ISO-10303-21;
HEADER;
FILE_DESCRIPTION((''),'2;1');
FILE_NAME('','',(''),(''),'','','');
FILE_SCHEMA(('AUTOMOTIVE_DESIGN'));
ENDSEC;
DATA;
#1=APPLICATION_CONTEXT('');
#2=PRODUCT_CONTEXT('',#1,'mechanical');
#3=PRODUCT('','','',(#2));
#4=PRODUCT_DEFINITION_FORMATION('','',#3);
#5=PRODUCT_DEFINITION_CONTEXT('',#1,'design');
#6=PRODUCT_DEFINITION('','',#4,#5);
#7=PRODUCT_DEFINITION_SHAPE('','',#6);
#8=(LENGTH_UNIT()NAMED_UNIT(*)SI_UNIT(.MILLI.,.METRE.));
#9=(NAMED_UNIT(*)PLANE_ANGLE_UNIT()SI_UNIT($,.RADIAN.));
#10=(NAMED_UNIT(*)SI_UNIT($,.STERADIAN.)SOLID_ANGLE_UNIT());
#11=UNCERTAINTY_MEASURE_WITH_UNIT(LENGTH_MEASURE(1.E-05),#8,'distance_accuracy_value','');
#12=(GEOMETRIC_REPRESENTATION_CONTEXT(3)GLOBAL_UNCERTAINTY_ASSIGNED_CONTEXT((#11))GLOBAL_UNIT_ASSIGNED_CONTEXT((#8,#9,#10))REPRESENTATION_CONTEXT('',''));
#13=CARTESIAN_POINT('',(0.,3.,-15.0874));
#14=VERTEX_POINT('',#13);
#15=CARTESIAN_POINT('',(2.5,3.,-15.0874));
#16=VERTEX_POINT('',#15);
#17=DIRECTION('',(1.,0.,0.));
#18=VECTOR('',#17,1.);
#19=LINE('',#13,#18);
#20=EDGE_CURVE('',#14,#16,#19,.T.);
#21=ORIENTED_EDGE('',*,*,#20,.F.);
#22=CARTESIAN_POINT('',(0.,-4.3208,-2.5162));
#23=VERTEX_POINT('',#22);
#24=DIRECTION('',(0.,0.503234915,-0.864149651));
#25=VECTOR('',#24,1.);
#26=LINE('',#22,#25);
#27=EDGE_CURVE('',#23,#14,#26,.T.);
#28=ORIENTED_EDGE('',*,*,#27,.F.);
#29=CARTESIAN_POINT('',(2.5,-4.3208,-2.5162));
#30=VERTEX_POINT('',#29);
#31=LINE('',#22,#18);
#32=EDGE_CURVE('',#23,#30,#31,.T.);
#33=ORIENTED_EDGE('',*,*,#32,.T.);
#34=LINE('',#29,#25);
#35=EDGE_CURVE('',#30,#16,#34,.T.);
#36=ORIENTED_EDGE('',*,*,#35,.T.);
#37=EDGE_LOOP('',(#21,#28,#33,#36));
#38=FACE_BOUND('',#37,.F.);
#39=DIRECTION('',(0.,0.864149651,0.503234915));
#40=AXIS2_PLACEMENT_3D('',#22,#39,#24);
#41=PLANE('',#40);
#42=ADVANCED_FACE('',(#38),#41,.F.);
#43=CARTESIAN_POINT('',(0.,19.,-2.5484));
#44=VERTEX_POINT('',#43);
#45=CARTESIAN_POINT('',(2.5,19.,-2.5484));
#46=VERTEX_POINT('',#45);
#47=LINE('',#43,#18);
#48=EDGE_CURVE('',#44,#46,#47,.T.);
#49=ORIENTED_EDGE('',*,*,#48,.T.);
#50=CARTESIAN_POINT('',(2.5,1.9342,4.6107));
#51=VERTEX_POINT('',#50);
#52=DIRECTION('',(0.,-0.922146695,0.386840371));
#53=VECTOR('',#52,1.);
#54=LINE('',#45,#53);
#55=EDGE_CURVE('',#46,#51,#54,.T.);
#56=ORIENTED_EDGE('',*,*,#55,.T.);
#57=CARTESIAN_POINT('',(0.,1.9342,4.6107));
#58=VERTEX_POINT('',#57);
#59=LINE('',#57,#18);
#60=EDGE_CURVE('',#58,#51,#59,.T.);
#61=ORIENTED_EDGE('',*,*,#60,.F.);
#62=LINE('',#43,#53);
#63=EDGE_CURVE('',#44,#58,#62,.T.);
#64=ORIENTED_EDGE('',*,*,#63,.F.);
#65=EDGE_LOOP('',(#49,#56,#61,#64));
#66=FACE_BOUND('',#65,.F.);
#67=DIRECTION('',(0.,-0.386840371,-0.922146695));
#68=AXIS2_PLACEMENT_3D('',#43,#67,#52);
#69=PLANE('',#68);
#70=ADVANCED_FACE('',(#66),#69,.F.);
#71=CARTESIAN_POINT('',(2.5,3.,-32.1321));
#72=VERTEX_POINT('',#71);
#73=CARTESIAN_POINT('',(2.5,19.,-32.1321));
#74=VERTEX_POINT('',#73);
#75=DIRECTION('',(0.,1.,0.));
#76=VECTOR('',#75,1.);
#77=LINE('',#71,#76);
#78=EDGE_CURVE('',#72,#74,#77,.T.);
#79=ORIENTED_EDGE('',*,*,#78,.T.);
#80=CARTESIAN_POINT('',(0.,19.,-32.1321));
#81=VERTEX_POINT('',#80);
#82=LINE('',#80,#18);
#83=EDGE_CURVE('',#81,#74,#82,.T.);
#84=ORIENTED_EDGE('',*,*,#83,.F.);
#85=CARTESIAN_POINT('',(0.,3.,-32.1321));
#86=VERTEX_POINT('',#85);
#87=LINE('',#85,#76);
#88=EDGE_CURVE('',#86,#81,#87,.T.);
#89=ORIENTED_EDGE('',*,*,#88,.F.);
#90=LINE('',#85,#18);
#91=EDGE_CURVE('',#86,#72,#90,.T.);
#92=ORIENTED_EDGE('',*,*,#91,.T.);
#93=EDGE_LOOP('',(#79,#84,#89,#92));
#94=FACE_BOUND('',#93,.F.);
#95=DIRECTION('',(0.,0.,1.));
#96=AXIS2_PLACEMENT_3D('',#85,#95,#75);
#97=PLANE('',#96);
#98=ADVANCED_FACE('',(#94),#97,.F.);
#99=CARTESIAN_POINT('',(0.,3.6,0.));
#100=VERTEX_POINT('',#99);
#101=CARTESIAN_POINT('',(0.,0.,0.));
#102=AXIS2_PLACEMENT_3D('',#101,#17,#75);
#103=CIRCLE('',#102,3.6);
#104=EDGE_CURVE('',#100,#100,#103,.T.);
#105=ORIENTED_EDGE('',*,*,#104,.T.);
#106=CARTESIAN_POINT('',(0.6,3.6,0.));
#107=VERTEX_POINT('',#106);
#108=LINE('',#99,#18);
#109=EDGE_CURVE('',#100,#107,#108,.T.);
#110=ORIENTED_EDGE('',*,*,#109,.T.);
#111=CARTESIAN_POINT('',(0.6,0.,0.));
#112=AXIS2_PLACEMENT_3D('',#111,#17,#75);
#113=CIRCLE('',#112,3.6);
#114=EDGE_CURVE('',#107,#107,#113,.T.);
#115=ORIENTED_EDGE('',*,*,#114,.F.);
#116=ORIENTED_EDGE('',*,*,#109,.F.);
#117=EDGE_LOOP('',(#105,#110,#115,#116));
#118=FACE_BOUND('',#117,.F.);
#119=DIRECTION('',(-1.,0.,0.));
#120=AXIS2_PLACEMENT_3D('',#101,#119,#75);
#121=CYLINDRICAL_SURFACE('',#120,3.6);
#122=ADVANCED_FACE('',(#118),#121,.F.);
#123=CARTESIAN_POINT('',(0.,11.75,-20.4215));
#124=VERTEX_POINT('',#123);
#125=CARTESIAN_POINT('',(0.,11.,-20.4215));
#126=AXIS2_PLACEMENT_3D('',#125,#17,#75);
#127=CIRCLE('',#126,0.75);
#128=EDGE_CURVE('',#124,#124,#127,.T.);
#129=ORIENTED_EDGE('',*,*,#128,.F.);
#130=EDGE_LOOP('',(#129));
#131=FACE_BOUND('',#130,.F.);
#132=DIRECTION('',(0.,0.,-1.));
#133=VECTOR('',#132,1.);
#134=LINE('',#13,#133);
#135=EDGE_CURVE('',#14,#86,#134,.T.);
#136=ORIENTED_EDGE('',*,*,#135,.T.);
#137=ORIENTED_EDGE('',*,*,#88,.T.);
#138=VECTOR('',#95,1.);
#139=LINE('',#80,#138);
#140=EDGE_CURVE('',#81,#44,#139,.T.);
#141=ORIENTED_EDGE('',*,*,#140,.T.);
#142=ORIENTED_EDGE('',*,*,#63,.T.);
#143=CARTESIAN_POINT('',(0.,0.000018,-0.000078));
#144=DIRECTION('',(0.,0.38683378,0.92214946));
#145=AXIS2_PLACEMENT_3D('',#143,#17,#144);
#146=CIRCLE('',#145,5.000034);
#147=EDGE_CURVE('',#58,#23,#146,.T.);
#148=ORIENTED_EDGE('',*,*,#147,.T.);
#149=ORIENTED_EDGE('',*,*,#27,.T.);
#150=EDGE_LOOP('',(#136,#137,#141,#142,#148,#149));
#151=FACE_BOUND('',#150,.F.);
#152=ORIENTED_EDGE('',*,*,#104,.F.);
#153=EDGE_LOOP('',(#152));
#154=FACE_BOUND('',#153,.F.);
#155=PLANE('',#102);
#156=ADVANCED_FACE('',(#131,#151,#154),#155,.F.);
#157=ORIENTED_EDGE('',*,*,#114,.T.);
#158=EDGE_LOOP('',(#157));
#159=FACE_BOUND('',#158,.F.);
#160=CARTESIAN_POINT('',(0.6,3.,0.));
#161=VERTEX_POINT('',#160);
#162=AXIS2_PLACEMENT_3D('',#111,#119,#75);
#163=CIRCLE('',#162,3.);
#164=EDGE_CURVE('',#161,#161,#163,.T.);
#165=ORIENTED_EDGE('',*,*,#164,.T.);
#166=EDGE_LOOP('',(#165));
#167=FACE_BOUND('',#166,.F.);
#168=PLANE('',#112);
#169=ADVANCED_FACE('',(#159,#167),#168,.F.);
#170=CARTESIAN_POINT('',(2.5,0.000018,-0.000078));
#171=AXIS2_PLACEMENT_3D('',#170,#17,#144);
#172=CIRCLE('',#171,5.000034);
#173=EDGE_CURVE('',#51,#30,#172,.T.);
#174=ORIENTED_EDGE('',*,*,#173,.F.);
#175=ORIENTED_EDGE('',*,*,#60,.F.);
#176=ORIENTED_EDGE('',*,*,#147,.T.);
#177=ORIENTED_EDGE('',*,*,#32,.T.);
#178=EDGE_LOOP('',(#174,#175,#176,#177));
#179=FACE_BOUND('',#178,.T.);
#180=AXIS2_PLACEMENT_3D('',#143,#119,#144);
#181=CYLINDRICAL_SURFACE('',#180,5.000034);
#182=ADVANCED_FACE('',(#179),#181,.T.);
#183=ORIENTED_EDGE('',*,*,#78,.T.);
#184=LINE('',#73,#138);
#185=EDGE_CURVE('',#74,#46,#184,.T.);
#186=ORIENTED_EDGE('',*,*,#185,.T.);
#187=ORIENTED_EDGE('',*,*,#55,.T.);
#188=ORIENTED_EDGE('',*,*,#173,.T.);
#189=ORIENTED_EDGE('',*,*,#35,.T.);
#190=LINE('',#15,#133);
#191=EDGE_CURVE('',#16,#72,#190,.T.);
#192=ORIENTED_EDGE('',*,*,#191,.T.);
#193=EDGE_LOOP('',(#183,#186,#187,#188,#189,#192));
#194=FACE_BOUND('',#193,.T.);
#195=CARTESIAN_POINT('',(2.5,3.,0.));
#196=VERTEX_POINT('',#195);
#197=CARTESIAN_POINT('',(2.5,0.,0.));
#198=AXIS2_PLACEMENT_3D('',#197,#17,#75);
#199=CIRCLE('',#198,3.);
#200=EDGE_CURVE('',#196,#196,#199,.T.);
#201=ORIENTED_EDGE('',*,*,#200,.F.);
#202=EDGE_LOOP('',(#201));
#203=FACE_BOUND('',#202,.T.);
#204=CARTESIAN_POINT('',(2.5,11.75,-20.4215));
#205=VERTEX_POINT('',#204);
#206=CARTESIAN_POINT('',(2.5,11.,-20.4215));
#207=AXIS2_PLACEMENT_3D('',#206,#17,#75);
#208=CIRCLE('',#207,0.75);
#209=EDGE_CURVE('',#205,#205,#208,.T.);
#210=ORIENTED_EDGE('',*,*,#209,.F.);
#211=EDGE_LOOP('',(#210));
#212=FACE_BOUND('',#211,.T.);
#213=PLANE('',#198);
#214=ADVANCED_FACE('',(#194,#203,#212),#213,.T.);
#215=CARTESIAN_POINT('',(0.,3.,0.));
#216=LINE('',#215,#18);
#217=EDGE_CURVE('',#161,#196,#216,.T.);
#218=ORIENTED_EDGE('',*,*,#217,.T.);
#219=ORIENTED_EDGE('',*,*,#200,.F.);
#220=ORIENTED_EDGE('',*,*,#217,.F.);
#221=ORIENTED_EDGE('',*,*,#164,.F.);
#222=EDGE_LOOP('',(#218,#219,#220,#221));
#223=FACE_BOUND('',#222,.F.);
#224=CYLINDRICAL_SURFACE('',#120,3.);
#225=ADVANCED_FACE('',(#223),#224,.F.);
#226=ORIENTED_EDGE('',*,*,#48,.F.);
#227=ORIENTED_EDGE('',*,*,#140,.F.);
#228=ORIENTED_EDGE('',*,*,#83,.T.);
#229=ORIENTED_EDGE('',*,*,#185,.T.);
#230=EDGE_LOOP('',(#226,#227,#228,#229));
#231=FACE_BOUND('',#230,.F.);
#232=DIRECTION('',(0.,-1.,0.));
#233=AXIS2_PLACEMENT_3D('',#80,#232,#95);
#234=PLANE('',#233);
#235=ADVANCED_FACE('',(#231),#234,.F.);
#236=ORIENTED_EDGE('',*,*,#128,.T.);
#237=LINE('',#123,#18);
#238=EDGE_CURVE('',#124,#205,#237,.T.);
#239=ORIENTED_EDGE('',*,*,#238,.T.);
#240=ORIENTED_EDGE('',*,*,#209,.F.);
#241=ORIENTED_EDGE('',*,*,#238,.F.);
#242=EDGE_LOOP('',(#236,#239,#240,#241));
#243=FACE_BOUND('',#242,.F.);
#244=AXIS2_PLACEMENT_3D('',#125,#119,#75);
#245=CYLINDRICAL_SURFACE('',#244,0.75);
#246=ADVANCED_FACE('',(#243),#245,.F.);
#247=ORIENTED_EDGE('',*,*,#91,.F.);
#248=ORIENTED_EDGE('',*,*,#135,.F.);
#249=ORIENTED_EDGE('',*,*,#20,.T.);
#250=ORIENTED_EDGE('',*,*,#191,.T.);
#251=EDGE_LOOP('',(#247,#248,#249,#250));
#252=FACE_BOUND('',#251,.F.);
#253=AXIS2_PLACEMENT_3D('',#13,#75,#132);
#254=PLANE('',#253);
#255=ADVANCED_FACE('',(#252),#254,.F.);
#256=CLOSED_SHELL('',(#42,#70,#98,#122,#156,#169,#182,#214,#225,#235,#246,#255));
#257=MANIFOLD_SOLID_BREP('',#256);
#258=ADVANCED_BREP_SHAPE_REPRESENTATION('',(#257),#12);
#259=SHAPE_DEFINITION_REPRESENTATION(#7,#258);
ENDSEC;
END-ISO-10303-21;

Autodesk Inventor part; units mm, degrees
ref_plane "YZ Plane" through (0, 0, 0) normal (1, 0, 0) x (0, 1, 0)
ref_plane "XZ Plane" through (0, 0, 0) normal (0, 1, 0) x (-1, 0, 0)
ref_plane "XY Plane" through (0, 0, 0) normal (0, 0, 1) x (1, 0, 0)
sketch "スケッチ1" plane through (0, 0, 0) normal (1, 0, 0) x (0, 1, 0)
  circle A0 centre (0, 0) radius 5 construction
  circle A1 centre (0, 0) radius 3.6
  arc A2 (1.9342, 4.6107) -> (-4.3208, -2.5162) centre (0, 0) ccw
  line L0 (-4.3208, -2.5162) -> (3, -15.0874)
  line L1 (3, -15.0874) -> (3, -32.1321)
  line L2 (3, -32.1321) -> (19, -32.1321)
  line L3 (19, -32.1321) -> (19, -2.5484)
  line L4 (19, -2.5484) -> (1.9342, 4.6107)
  circle A3 centre (0, 0) radius 3
  circle A4 centre (11, -20.4215) radius 0.75
  circle A5 centre (11, -20.4215) radius 5 construction
  circle A6 centre (16, -20.4215) radius 1 construction
  line L5 (16, -20.4215) -> (6, -20.4215) construction
  circle A7 centre (6, -20.4215) radius 1 construction
  circle A8 centre (11, -20.4215) radius 8 construction
  dimension "d1" = 10
  dimension "d0" = 7.2
  dimension "d4" = 6
  dimension "d7" = 1.5
  dimension "d8" = 10
  dimension "d9" = 2
  dimension "d11" = 16
extrude "押し出し1" add sketch "スケッチ1" along normal blind 2.5 contours A1 | L4 L3 L2 L1 L0 A2
extrude "押し出し2" cut sketch "スケッチ1" along normal blind 0.6 contours A1 | A3
properties part number "Gear_Frame"
